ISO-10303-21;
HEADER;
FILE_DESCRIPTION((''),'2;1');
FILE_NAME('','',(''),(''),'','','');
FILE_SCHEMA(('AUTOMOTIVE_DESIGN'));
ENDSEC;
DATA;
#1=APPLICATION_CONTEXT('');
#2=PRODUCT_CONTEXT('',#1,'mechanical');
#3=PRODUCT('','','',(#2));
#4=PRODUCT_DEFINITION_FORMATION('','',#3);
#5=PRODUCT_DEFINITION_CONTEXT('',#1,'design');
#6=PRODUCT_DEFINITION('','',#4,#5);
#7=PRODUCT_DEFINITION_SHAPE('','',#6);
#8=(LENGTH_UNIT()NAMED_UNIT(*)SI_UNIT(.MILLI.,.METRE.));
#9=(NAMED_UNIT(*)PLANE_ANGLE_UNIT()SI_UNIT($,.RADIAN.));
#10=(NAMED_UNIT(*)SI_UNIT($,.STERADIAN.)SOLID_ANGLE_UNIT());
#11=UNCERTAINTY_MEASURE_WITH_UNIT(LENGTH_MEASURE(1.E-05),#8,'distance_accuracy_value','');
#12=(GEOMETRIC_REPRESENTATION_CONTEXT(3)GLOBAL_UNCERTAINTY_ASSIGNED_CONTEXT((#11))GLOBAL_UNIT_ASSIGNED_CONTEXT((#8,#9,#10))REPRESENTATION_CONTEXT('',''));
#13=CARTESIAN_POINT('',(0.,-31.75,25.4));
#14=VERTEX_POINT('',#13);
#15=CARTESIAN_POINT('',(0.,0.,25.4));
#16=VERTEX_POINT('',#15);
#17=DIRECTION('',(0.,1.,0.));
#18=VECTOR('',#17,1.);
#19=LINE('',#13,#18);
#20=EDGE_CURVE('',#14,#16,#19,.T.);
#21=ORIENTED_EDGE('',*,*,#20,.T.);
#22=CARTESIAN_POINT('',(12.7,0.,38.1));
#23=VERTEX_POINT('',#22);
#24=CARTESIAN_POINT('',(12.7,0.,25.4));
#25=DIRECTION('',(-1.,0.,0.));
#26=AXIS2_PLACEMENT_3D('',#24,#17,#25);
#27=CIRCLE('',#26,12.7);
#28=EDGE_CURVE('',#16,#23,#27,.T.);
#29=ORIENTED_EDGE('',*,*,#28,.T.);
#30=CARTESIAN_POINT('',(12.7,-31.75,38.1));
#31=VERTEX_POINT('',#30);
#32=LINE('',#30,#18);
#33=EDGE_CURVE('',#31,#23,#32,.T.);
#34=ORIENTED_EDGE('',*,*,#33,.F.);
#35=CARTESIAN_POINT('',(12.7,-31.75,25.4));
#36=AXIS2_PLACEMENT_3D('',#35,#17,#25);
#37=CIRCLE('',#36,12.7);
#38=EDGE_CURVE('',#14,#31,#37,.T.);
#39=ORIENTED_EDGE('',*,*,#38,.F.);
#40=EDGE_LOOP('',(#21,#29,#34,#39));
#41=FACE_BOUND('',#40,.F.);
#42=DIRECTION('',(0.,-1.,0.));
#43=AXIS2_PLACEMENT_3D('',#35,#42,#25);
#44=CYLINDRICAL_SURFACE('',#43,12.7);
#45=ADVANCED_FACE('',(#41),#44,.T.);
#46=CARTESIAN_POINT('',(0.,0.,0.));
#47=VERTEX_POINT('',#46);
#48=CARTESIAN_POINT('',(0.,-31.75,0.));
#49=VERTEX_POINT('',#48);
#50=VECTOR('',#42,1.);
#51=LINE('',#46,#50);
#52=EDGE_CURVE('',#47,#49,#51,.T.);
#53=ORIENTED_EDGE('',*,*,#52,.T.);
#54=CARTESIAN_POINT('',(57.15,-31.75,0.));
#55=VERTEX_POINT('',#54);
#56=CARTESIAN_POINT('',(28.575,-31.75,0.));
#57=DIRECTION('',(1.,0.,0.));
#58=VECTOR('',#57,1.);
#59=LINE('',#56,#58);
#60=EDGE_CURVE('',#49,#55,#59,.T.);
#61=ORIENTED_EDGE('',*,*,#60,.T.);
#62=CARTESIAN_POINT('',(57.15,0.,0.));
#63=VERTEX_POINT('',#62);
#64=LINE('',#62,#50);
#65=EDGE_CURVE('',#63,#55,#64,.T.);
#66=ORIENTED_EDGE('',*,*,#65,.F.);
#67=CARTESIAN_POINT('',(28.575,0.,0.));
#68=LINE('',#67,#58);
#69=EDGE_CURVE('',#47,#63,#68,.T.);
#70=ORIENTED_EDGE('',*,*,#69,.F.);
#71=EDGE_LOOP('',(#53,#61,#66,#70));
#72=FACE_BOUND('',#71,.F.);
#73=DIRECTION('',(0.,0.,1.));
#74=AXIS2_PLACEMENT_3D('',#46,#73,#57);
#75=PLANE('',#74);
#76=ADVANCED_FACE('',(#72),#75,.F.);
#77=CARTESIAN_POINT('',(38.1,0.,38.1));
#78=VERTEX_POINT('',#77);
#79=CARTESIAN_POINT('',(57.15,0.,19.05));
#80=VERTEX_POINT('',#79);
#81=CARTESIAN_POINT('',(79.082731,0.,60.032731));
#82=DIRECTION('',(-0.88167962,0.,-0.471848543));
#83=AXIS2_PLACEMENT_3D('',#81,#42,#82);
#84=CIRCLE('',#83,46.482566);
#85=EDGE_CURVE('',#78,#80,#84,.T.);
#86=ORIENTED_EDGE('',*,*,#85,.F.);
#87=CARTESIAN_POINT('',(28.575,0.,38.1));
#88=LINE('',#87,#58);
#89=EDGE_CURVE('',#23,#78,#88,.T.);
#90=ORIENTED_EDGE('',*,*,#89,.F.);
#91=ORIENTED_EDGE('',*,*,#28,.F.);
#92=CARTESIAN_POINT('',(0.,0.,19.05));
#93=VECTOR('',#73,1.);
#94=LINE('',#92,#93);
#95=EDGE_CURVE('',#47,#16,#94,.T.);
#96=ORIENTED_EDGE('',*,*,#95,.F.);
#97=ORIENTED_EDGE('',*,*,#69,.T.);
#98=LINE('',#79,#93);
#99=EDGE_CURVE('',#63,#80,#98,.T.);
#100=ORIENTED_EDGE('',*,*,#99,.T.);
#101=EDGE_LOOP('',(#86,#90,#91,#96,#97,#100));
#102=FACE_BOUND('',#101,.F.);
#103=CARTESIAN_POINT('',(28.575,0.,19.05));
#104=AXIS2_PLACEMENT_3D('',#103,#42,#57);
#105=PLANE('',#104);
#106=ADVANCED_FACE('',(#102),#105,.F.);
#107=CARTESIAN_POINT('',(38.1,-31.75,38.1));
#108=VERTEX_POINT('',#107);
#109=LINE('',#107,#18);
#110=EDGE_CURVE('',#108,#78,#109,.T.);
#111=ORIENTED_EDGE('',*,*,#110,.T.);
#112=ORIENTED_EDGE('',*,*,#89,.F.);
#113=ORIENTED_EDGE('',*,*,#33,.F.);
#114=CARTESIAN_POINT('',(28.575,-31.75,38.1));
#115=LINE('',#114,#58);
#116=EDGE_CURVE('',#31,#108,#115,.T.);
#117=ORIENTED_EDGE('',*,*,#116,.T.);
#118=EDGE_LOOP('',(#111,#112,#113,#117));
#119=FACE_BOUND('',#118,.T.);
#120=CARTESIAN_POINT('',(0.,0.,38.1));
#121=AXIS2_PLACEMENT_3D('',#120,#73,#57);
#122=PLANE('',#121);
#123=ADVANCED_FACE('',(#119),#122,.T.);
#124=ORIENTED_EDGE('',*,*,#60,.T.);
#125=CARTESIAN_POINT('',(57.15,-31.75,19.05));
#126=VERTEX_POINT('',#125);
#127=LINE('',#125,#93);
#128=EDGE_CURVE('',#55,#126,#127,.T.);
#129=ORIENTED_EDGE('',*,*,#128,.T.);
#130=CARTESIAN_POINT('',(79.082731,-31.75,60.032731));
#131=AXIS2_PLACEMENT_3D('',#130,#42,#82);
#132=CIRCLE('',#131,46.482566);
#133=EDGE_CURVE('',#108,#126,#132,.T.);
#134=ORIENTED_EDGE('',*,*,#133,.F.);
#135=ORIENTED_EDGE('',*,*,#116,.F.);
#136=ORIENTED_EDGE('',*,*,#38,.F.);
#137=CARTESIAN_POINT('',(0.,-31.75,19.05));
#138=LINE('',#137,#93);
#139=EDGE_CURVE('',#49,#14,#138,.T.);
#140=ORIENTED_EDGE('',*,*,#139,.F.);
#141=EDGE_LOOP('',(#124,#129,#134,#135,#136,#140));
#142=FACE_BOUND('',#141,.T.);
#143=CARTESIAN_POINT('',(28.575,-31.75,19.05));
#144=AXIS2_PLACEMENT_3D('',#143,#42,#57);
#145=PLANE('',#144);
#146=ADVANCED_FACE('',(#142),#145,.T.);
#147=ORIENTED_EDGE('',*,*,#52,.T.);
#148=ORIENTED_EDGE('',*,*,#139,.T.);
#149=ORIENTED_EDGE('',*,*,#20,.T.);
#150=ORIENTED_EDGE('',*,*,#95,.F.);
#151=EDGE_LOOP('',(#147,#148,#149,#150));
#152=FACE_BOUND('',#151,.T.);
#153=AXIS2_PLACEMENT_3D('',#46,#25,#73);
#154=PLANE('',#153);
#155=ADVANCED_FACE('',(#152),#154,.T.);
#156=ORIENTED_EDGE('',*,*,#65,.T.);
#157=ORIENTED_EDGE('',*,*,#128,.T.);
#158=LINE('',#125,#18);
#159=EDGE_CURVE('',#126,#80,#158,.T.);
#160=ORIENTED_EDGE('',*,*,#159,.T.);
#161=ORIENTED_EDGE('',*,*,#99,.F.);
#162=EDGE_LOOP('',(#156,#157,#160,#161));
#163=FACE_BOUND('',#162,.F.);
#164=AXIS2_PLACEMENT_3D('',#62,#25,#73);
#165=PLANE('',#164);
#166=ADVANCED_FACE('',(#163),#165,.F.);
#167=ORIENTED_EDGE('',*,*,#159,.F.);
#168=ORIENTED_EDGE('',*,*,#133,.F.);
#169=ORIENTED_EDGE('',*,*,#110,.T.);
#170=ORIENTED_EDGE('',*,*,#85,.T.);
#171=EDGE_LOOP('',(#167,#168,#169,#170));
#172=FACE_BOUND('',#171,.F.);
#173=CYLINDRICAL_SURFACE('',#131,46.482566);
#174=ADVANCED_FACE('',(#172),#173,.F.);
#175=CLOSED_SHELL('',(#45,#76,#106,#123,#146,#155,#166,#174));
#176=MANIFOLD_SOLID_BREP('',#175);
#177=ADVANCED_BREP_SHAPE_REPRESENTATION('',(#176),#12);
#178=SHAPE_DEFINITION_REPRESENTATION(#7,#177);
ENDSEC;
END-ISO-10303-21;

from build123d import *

# Parameters (mm, degrees)
F0_W     = 57.15
F0_H     = 38.1
F1_DEPTH = 31.75
F3_DEPTH = 31.75
F5_DEPTH = 31.75


# Not quite as in the source:
# - a length typed as a fraction of an inch, garbled in the dataset ("3 / 203.2 mm" for 3/8 in), is restored
# - a feature names something its author has since deleted; it is built from what else it names


with BuildPart() as f1:
    # F0 (on Front) → F1 (new body)
    with BuildSketch(Plane.XZ):
        with Locations((28.575, 19.05)):
            Rectangle(F0_W, F0_H)
    extrude(amount=F1_DEPTH)

    # F2 (on face) → F3 (cut)
    with BuildSketch(Plane.XZ.offset(31.75)):
        with BuildLine():
            Line((57.15, 38.1), (38.1, 38.1))
            ThreePointArc((38.1, 38.1), (46.2145934678, 27.1645934678), (57.15, 19.05))
            Line((57.15, 19.05), (57.15, 38.1))
        make_face()
    extrude(amount=-F3_DEPTH, mode=Mode.SUBTRACT)

    # F4 (on face) → F5 (cut)
    with BuildSketch(Plane.XZ.offset(31.75)):
        with BuildLine():
            Line((0, 38.1), (0, 25.4))
            ThreePointArc((0, 25.4), (3.7197438789, 34.3802561211), (12.7, 38.1))
            Line((12.7, 38.1), (0, 38.1))
        make_face()
    extrude(amount=-F5_DEPTH, mode=Mode.SUBTRACT)


solid = f1.part
